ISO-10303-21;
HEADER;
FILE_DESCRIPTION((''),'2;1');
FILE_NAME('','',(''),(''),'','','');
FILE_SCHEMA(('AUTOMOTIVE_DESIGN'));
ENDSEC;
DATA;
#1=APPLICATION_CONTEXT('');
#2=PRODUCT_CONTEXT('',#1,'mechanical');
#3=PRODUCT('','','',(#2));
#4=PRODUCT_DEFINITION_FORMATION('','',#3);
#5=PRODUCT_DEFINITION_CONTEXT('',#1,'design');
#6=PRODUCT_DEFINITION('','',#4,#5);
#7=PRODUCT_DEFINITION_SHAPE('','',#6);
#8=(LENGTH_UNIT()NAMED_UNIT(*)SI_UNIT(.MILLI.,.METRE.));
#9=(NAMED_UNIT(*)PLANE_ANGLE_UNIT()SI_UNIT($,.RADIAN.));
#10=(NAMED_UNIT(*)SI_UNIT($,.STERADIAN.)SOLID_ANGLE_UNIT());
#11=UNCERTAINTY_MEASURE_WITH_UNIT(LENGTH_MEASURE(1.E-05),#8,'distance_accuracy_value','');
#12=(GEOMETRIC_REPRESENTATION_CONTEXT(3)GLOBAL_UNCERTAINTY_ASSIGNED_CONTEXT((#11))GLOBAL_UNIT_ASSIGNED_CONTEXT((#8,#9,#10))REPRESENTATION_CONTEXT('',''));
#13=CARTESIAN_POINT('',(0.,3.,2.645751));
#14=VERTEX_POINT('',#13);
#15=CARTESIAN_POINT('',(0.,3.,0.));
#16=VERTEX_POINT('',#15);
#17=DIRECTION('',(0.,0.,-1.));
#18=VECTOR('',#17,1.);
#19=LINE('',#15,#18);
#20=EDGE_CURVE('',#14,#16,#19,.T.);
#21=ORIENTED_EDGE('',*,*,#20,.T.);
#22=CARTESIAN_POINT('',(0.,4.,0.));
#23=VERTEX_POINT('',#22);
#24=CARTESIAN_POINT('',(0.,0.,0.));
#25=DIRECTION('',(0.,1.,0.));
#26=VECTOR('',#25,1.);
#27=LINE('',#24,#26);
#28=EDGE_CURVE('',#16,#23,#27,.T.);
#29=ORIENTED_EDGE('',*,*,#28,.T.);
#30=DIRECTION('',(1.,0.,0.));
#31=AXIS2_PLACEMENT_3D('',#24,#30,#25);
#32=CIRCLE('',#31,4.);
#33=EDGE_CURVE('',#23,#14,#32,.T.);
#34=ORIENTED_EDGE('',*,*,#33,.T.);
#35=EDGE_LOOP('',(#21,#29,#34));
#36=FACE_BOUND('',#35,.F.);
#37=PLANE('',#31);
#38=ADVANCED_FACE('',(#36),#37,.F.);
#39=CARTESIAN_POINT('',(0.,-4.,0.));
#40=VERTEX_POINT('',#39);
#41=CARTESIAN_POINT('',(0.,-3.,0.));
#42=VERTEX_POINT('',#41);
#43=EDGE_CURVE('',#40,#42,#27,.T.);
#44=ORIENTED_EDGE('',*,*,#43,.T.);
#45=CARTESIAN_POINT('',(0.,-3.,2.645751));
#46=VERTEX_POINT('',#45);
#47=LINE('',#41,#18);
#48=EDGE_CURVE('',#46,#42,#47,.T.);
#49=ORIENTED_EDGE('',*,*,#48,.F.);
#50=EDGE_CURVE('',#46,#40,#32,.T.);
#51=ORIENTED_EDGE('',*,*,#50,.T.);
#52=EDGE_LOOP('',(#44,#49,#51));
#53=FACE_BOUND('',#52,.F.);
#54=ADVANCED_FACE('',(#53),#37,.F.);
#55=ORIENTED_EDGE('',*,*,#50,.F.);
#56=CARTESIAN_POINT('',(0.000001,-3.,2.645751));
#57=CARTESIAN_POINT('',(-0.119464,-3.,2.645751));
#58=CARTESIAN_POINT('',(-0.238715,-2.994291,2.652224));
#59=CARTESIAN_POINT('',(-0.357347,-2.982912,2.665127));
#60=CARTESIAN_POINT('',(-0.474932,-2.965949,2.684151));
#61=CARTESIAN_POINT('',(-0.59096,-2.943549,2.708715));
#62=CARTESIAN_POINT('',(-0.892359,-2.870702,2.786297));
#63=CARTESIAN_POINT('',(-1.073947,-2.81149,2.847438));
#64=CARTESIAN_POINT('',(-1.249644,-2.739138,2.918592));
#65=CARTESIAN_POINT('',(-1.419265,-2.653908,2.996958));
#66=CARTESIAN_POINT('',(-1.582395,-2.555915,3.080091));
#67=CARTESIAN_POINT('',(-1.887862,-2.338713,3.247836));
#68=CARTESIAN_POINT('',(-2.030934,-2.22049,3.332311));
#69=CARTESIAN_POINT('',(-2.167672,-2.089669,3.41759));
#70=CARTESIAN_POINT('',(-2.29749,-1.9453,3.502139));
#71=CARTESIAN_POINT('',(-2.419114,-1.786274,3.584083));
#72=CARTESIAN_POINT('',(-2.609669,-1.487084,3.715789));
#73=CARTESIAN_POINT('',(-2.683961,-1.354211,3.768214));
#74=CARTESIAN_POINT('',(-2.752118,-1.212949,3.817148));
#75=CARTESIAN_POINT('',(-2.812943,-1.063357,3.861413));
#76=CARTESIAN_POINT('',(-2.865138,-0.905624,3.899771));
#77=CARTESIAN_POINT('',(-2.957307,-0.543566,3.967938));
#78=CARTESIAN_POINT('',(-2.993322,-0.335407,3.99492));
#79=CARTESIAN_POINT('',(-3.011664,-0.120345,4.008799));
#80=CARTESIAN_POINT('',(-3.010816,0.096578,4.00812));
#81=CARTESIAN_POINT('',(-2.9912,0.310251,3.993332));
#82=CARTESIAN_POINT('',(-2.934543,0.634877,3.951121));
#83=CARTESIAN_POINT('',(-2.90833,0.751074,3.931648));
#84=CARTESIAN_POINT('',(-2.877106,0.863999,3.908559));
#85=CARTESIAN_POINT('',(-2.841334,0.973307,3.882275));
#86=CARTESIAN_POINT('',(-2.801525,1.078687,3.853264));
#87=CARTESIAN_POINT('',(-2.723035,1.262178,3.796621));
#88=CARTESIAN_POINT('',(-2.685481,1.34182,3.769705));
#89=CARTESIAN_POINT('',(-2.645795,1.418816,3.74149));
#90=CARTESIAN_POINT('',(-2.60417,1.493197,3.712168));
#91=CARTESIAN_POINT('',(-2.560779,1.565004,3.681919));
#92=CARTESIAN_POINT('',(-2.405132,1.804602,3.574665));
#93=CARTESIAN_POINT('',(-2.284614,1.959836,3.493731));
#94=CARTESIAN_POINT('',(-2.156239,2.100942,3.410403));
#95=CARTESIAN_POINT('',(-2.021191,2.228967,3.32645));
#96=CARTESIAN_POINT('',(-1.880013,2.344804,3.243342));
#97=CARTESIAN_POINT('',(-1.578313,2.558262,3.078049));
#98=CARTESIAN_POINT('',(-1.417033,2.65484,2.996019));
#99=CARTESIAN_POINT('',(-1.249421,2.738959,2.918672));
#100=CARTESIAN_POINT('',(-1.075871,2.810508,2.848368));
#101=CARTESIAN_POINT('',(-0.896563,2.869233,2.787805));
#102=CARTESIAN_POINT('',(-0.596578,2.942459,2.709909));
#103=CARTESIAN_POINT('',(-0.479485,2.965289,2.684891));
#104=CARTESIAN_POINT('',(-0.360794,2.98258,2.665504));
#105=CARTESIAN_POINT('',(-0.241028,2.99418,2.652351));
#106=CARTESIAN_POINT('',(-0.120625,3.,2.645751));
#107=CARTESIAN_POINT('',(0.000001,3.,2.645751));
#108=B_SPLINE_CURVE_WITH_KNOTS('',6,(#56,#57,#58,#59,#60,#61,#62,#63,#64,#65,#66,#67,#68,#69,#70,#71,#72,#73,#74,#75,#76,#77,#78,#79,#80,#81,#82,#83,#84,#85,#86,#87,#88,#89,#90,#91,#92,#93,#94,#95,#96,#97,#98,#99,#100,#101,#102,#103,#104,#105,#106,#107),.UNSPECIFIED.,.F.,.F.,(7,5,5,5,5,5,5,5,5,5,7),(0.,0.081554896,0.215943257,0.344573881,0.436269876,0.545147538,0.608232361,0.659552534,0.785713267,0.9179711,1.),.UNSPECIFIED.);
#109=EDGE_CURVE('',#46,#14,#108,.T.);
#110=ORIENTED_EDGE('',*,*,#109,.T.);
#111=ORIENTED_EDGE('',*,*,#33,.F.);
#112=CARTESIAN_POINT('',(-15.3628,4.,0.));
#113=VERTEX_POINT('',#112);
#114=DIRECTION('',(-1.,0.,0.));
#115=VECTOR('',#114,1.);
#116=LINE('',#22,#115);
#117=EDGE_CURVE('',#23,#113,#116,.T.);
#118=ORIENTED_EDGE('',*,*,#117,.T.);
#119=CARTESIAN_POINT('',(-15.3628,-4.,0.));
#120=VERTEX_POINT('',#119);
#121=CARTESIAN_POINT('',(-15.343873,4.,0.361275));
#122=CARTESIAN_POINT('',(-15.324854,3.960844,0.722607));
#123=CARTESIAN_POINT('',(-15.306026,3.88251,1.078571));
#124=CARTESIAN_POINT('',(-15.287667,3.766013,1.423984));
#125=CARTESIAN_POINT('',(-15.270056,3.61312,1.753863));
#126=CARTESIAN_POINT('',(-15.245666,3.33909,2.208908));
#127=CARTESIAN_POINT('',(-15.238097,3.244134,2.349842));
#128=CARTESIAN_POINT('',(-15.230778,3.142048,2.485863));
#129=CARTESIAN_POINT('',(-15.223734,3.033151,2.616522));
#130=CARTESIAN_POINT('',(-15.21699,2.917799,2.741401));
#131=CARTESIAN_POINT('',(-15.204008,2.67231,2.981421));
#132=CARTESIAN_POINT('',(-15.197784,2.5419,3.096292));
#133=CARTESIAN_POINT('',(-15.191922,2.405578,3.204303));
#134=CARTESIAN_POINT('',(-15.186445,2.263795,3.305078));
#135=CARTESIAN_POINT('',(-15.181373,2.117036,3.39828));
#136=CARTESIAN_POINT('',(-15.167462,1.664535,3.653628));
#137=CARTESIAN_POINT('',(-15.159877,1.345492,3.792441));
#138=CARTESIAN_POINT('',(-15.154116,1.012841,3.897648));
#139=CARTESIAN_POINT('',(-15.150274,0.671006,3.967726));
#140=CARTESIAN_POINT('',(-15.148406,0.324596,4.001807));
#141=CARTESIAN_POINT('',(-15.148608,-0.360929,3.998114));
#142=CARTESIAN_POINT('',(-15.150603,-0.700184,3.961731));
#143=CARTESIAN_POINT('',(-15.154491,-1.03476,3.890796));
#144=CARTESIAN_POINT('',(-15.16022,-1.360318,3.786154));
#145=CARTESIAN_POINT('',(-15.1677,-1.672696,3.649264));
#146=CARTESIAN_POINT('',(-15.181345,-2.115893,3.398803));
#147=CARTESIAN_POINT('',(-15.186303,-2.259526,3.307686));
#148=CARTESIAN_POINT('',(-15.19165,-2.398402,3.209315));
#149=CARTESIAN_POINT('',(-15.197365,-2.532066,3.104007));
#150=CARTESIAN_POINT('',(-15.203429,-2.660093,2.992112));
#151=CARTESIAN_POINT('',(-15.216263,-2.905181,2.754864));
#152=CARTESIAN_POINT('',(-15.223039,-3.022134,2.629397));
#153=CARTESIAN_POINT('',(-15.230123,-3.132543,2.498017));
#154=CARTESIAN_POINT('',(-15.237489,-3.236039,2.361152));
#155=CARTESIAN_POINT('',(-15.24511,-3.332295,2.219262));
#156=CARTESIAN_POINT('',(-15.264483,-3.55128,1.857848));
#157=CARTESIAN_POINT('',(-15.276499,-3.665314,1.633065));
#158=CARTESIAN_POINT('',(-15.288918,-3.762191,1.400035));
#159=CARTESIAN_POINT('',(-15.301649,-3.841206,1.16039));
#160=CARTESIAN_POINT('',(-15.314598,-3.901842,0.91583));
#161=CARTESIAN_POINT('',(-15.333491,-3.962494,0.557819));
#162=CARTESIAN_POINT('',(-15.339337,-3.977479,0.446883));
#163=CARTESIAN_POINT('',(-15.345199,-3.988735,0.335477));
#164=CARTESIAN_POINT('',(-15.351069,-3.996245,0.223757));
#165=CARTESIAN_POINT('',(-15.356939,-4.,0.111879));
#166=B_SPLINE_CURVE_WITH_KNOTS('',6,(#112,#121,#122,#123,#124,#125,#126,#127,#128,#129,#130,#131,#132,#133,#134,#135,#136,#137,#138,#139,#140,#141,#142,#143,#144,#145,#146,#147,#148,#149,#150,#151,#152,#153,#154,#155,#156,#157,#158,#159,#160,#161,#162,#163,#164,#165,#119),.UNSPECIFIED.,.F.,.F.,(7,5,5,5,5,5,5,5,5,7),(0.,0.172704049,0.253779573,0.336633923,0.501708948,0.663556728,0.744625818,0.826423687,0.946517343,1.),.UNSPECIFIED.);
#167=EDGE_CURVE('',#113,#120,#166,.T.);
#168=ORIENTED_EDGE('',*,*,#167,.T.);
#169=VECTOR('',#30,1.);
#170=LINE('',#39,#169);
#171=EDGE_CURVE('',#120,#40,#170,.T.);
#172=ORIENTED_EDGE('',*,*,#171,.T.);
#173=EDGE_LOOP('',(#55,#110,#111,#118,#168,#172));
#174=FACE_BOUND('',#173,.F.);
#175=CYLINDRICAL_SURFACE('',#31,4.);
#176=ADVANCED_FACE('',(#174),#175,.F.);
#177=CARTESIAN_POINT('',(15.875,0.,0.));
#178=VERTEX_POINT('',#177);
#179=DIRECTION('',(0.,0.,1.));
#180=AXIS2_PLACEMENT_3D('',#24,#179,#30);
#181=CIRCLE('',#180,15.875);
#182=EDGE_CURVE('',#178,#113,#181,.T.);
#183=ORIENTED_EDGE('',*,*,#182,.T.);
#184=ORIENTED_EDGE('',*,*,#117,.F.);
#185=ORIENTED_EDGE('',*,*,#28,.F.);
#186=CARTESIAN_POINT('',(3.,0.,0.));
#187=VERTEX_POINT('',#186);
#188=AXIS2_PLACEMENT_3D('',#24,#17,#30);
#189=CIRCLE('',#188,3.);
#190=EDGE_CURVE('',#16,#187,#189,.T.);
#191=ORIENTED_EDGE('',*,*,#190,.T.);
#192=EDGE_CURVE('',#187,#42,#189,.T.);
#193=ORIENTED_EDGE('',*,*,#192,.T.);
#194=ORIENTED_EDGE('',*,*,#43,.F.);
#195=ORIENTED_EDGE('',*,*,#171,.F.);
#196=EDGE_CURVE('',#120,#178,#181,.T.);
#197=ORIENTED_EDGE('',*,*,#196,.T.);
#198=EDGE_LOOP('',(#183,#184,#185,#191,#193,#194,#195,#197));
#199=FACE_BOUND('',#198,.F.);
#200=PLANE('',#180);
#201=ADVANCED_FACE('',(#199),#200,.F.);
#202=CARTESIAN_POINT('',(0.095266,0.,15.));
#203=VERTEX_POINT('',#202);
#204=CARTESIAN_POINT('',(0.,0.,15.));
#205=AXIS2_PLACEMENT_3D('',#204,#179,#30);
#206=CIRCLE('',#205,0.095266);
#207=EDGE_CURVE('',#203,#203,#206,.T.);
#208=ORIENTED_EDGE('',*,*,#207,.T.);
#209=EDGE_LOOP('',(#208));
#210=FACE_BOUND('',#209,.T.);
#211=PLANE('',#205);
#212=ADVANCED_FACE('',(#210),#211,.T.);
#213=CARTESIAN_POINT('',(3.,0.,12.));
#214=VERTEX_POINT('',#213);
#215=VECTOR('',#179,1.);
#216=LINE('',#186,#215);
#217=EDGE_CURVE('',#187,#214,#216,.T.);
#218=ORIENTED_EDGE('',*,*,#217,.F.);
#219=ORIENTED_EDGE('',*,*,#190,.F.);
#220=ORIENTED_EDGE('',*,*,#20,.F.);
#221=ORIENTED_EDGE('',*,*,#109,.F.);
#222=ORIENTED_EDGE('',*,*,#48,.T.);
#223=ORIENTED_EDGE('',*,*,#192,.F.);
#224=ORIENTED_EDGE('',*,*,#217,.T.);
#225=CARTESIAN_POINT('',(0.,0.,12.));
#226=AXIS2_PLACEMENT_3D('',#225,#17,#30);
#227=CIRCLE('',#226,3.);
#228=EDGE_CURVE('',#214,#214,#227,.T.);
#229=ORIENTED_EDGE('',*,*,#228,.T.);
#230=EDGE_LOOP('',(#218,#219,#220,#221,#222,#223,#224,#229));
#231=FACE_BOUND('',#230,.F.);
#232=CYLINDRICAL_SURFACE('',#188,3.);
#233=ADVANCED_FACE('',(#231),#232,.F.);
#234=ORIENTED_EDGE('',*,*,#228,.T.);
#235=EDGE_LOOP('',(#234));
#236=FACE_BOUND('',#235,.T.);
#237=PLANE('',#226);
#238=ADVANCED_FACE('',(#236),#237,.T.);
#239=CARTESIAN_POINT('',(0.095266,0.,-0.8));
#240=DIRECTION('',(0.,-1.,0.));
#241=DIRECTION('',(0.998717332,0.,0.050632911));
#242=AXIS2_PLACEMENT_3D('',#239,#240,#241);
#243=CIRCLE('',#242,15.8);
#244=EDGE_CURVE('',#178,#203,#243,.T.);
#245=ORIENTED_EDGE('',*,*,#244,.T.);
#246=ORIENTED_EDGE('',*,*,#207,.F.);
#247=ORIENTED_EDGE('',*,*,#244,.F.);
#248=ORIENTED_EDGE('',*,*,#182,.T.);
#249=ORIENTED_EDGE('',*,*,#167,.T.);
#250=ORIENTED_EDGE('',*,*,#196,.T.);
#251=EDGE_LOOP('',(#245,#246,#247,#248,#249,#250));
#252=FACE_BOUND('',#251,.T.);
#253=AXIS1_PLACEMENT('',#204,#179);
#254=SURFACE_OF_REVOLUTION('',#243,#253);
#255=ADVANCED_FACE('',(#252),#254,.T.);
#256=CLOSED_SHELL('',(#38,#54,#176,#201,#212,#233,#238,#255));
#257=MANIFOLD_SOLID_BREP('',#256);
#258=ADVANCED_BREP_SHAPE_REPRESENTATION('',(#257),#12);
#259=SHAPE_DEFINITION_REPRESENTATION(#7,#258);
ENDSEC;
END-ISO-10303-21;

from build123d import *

# Parameters (mm, degrees)
F0_R     = 15.875
F1_DEPTH = 15
F3_R     = 3
F4_DEPTH = 12
F5_R     = 4
F6_DEPTH = 25


# Not quite as in the source:
# - a fillet or chamfer that OpenCascade refuses, or shapes differently, is made with other operations: its cross-section is extruded or revolved along the edge and cut away or added


with BuildPart() as f1:
    # F0 (on Top) → F1 (new body)
    with BuildSketch(Plane.XY):
        Circle(F0_R)
    extrude(amount=F1_DEPTH)

    # F2: fillet of radius 15.8 on 1 edges, made by hand

    # F2_s1 → F2_t2 (revolve, cut)
    with BuildSketch(Plane.XZ):
        with BuildLine():
            ThreePointArc((15.875, 0), (10.9810366905, 10.6516374375), (0.0952661619, 15))
            Line((0.0952661619, 15), (15.875, 15))
            Line((15.875, 15), (15.875, 0))
        make_face()
    revolve(axis=Axis((0, 0, 15), (0, 0, 1)), mode=Mode.SUBTRACT)

    # F3 (on face) → F4 (cut)
    with BuildSketch(Plane(origin=(0, 0, 0), x_dir=(1, 0, 0), z_dir=(0, 0, -1))):
        Circle(F3_R)
    extrude(amount=-F4_DEPTH, mode=Mode.SUBTRACT)

    # F5 (on Right) → F6 (cut)
    with BuildSketch(Plane.YZ):
        Circle(F5_R)
    extrude(amount=-F6_DEPTH, mode=Mode.SUBTRACT)


solid = f1.part
